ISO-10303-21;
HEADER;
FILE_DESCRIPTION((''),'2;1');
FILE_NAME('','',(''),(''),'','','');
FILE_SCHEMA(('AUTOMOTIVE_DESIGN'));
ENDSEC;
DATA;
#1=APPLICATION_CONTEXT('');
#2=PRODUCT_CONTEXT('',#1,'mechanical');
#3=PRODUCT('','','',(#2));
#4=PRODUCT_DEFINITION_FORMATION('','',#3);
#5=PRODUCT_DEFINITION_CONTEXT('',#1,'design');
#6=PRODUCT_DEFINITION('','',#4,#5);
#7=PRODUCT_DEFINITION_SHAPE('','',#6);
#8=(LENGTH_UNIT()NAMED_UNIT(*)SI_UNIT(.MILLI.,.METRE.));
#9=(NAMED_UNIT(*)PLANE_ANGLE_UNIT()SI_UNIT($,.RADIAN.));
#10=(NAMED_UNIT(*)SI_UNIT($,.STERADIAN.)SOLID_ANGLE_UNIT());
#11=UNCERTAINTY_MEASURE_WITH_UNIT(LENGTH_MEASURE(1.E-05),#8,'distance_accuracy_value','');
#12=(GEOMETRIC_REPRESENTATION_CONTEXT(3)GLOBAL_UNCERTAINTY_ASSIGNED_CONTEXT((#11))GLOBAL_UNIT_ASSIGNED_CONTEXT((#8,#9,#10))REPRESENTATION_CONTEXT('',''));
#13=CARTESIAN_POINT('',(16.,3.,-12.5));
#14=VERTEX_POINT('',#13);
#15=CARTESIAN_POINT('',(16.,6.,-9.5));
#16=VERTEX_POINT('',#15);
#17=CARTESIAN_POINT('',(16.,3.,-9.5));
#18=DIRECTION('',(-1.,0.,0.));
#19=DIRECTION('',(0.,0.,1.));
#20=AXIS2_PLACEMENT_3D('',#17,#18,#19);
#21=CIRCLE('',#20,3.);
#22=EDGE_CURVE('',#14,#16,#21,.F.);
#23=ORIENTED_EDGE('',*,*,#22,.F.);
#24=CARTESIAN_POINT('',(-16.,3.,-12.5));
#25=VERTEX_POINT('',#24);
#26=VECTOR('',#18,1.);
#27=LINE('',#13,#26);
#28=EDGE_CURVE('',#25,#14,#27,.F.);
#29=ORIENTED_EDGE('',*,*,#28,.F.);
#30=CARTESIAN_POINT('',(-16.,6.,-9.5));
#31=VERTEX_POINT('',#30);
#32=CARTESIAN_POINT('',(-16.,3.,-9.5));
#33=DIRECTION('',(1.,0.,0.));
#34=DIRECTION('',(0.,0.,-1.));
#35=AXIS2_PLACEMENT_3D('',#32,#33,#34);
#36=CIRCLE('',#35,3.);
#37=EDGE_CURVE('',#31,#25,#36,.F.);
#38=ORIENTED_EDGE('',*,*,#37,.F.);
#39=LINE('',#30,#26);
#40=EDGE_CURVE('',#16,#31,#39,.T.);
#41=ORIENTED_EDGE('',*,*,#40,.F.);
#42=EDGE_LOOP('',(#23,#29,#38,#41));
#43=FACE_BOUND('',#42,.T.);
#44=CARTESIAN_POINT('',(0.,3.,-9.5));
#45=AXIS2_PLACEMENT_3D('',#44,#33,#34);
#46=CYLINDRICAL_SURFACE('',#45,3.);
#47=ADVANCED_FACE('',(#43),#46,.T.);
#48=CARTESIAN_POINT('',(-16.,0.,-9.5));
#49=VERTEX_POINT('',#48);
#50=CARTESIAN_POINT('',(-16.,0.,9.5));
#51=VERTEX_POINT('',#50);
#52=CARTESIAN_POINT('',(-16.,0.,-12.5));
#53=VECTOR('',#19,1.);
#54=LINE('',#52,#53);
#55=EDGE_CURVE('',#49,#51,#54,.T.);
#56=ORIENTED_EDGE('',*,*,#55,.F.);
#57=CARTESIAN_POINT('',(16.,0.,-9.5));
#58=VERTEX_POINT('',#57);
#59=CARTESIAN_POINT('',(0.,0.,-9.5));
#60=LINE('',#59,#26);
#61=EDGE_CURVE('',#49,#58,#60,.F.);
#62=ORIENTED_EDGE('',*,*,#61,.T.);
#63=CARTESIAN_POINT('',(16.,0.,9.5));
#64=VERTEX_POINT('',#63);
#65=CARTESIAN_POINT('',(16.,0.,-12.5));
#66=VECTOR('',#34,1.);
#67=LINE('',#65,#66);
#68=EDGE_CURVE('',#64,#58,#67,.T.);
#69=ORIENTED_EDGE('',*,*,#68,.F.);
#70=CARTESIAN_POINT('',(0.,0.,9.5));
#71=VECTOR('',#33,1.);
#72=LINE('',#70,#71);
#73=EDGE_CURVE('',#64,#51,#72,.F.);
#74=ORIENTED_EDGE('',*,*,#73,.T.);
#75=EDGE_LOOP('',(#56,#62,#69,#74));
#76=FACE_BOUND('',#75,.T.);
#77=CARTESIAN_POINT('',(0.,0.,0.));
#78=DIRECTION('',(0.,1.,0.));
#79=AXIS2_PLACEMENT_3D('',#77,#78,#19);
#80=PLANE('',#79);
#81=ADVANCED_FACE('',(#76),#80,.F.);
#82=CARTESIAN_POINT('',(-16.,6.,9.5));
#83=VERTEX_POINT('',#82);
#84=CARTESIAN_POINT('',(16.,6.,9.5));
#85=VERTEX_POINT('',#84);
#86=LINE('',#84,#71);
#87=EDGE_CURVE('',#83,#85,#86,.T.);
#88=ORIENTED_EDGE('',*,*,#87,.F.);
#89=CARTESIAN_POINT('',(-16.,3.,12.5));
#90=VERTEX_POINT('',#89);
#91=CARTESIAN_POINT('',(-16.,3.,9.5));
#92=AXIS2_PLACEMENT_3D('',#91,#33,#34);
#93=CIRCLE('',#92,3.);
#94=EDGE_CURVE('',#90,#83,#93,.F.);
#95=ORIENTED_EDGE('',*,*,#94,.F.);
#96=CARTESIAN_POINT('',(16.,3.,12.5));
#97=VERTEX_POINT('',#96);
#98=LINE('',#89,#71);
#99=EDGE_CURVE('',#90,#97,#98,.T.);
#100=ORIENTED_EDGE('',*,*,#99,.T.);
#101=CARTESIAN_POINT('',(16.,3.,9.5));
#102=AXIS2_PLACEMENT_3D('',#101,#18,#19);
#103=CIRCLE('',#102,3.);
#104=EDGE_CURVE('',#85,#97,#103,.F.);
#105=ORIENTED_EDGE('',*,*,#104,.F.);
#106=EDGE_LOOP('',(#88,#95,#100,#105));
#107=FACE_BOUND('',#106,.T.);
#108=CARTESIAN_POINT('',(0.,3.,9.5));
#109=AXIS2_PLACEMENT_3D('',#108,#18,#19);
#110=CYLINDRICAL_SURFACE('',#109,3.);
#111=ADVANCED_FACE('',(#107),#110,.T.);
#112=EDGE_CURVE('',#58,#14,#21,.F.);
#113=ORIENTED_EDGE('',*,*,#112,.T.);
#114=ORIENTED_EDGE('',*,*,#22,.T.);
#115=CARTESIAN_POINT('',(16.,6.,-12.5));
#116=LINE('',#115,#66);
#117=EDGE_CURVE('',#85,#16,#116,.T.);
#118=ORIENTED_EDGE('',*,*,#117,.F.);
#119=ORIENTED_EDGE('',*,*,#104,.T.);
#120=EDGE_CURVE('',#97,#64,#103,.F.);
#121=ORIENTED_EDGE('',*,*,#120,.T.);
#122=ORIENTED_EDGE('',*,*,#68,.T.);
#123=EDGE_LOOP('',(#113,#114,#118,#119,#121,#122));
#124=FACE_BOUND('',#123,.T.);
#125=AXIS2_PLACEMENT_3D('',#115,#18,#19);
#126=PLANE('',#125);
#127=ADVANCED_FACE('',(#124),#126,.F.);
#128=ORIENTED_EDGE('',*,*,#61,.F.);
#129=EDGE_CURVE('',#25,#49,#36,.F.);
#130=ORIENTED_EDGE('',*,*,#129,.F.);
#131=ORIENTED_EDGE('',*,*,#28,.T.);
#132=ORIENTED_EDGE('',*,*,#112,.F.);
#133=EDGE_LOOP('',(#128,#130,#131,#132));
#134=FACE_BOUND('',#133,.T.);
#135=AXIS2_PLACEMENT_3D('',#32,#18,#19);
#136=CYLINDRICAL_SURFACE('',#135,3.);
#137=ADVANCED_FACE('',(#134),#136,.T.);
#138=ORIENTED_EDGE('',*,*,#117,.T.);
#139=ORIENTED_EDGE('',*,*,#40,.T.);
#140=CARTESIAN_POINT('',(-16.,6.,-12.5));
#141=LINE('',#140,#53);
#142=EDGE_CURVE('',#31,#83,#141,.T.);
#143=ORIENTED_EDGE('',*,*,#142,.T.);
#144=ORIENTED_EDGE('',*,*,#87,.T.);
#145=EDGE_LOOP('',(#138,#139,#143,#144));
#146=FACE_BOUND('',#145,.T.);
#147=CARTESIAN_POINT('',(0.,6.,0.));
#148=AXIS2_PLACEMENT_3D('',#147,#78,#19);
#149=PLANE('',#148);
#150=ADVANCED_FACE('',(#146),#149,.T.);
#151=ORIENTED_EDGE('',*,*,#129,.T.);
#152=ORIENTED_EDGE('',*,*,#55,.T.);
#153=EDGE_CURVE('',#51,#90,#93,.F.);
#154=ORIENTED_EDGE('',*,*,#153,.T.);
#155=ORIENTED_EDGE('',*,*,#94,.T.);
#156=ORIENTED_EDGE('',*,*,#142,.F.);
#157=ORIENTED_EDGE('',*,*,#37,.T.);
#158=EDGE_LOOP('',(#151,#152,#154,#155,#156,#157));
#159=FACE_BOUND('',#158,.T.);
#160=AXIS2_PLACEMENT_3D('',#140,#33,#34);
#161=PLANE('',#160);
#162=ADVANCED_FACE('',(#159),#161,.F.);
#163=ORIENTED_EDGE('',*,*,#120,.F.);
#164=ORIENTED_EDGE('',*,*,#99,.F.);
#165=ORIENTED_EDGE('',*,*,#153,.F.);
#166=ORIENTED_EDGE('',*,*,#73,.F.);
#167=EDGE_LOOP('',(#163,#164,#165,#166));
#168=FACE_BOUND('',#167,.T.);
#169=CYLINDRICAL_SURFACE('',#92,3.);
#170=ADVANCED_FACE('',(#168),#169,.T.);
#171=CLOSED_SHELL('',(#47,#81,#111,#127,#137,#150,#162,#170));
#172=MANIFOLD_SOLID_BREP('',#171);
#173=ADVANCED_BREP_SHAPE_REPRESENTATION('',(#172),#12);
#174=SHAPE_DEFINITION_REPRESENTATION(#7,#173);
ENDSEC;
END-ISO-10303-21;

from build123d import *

# Parameters (mm, degrees)
SKETCH_1_W      = 32
SKETCH_1_H      = 25
EXTRUDE_1_DEPTH = 6
FILLET_1_R      = 3


with BuildPart() as part:
    # 草图1 → 凸台-拉伸1 (new body)
    with BuildSketch(Plane(origin=(0, 0, 0), x_dir=(1, 0, 0), z_dir=(0, 1, 0))):
        Rectangle(SKETCH_1_W, SKETCH_1_H)
    extrude(amount=EXTRUDE_1_DEPTH)

    # 圆角1
    fillet_1_edges = [part.edges().sort_by_distance(p)[0] for p in [
        (0, 0, -12.5),
        (0, 6, -12.5),
        (0, 6, 12.5),
        (0, 0, 12.5),
    ]]
    fillet(fillet_1_edges, radius=FILLET_1_R - 0.0001)  # a hair under: the kernel refuses the full size


solid = part.part
